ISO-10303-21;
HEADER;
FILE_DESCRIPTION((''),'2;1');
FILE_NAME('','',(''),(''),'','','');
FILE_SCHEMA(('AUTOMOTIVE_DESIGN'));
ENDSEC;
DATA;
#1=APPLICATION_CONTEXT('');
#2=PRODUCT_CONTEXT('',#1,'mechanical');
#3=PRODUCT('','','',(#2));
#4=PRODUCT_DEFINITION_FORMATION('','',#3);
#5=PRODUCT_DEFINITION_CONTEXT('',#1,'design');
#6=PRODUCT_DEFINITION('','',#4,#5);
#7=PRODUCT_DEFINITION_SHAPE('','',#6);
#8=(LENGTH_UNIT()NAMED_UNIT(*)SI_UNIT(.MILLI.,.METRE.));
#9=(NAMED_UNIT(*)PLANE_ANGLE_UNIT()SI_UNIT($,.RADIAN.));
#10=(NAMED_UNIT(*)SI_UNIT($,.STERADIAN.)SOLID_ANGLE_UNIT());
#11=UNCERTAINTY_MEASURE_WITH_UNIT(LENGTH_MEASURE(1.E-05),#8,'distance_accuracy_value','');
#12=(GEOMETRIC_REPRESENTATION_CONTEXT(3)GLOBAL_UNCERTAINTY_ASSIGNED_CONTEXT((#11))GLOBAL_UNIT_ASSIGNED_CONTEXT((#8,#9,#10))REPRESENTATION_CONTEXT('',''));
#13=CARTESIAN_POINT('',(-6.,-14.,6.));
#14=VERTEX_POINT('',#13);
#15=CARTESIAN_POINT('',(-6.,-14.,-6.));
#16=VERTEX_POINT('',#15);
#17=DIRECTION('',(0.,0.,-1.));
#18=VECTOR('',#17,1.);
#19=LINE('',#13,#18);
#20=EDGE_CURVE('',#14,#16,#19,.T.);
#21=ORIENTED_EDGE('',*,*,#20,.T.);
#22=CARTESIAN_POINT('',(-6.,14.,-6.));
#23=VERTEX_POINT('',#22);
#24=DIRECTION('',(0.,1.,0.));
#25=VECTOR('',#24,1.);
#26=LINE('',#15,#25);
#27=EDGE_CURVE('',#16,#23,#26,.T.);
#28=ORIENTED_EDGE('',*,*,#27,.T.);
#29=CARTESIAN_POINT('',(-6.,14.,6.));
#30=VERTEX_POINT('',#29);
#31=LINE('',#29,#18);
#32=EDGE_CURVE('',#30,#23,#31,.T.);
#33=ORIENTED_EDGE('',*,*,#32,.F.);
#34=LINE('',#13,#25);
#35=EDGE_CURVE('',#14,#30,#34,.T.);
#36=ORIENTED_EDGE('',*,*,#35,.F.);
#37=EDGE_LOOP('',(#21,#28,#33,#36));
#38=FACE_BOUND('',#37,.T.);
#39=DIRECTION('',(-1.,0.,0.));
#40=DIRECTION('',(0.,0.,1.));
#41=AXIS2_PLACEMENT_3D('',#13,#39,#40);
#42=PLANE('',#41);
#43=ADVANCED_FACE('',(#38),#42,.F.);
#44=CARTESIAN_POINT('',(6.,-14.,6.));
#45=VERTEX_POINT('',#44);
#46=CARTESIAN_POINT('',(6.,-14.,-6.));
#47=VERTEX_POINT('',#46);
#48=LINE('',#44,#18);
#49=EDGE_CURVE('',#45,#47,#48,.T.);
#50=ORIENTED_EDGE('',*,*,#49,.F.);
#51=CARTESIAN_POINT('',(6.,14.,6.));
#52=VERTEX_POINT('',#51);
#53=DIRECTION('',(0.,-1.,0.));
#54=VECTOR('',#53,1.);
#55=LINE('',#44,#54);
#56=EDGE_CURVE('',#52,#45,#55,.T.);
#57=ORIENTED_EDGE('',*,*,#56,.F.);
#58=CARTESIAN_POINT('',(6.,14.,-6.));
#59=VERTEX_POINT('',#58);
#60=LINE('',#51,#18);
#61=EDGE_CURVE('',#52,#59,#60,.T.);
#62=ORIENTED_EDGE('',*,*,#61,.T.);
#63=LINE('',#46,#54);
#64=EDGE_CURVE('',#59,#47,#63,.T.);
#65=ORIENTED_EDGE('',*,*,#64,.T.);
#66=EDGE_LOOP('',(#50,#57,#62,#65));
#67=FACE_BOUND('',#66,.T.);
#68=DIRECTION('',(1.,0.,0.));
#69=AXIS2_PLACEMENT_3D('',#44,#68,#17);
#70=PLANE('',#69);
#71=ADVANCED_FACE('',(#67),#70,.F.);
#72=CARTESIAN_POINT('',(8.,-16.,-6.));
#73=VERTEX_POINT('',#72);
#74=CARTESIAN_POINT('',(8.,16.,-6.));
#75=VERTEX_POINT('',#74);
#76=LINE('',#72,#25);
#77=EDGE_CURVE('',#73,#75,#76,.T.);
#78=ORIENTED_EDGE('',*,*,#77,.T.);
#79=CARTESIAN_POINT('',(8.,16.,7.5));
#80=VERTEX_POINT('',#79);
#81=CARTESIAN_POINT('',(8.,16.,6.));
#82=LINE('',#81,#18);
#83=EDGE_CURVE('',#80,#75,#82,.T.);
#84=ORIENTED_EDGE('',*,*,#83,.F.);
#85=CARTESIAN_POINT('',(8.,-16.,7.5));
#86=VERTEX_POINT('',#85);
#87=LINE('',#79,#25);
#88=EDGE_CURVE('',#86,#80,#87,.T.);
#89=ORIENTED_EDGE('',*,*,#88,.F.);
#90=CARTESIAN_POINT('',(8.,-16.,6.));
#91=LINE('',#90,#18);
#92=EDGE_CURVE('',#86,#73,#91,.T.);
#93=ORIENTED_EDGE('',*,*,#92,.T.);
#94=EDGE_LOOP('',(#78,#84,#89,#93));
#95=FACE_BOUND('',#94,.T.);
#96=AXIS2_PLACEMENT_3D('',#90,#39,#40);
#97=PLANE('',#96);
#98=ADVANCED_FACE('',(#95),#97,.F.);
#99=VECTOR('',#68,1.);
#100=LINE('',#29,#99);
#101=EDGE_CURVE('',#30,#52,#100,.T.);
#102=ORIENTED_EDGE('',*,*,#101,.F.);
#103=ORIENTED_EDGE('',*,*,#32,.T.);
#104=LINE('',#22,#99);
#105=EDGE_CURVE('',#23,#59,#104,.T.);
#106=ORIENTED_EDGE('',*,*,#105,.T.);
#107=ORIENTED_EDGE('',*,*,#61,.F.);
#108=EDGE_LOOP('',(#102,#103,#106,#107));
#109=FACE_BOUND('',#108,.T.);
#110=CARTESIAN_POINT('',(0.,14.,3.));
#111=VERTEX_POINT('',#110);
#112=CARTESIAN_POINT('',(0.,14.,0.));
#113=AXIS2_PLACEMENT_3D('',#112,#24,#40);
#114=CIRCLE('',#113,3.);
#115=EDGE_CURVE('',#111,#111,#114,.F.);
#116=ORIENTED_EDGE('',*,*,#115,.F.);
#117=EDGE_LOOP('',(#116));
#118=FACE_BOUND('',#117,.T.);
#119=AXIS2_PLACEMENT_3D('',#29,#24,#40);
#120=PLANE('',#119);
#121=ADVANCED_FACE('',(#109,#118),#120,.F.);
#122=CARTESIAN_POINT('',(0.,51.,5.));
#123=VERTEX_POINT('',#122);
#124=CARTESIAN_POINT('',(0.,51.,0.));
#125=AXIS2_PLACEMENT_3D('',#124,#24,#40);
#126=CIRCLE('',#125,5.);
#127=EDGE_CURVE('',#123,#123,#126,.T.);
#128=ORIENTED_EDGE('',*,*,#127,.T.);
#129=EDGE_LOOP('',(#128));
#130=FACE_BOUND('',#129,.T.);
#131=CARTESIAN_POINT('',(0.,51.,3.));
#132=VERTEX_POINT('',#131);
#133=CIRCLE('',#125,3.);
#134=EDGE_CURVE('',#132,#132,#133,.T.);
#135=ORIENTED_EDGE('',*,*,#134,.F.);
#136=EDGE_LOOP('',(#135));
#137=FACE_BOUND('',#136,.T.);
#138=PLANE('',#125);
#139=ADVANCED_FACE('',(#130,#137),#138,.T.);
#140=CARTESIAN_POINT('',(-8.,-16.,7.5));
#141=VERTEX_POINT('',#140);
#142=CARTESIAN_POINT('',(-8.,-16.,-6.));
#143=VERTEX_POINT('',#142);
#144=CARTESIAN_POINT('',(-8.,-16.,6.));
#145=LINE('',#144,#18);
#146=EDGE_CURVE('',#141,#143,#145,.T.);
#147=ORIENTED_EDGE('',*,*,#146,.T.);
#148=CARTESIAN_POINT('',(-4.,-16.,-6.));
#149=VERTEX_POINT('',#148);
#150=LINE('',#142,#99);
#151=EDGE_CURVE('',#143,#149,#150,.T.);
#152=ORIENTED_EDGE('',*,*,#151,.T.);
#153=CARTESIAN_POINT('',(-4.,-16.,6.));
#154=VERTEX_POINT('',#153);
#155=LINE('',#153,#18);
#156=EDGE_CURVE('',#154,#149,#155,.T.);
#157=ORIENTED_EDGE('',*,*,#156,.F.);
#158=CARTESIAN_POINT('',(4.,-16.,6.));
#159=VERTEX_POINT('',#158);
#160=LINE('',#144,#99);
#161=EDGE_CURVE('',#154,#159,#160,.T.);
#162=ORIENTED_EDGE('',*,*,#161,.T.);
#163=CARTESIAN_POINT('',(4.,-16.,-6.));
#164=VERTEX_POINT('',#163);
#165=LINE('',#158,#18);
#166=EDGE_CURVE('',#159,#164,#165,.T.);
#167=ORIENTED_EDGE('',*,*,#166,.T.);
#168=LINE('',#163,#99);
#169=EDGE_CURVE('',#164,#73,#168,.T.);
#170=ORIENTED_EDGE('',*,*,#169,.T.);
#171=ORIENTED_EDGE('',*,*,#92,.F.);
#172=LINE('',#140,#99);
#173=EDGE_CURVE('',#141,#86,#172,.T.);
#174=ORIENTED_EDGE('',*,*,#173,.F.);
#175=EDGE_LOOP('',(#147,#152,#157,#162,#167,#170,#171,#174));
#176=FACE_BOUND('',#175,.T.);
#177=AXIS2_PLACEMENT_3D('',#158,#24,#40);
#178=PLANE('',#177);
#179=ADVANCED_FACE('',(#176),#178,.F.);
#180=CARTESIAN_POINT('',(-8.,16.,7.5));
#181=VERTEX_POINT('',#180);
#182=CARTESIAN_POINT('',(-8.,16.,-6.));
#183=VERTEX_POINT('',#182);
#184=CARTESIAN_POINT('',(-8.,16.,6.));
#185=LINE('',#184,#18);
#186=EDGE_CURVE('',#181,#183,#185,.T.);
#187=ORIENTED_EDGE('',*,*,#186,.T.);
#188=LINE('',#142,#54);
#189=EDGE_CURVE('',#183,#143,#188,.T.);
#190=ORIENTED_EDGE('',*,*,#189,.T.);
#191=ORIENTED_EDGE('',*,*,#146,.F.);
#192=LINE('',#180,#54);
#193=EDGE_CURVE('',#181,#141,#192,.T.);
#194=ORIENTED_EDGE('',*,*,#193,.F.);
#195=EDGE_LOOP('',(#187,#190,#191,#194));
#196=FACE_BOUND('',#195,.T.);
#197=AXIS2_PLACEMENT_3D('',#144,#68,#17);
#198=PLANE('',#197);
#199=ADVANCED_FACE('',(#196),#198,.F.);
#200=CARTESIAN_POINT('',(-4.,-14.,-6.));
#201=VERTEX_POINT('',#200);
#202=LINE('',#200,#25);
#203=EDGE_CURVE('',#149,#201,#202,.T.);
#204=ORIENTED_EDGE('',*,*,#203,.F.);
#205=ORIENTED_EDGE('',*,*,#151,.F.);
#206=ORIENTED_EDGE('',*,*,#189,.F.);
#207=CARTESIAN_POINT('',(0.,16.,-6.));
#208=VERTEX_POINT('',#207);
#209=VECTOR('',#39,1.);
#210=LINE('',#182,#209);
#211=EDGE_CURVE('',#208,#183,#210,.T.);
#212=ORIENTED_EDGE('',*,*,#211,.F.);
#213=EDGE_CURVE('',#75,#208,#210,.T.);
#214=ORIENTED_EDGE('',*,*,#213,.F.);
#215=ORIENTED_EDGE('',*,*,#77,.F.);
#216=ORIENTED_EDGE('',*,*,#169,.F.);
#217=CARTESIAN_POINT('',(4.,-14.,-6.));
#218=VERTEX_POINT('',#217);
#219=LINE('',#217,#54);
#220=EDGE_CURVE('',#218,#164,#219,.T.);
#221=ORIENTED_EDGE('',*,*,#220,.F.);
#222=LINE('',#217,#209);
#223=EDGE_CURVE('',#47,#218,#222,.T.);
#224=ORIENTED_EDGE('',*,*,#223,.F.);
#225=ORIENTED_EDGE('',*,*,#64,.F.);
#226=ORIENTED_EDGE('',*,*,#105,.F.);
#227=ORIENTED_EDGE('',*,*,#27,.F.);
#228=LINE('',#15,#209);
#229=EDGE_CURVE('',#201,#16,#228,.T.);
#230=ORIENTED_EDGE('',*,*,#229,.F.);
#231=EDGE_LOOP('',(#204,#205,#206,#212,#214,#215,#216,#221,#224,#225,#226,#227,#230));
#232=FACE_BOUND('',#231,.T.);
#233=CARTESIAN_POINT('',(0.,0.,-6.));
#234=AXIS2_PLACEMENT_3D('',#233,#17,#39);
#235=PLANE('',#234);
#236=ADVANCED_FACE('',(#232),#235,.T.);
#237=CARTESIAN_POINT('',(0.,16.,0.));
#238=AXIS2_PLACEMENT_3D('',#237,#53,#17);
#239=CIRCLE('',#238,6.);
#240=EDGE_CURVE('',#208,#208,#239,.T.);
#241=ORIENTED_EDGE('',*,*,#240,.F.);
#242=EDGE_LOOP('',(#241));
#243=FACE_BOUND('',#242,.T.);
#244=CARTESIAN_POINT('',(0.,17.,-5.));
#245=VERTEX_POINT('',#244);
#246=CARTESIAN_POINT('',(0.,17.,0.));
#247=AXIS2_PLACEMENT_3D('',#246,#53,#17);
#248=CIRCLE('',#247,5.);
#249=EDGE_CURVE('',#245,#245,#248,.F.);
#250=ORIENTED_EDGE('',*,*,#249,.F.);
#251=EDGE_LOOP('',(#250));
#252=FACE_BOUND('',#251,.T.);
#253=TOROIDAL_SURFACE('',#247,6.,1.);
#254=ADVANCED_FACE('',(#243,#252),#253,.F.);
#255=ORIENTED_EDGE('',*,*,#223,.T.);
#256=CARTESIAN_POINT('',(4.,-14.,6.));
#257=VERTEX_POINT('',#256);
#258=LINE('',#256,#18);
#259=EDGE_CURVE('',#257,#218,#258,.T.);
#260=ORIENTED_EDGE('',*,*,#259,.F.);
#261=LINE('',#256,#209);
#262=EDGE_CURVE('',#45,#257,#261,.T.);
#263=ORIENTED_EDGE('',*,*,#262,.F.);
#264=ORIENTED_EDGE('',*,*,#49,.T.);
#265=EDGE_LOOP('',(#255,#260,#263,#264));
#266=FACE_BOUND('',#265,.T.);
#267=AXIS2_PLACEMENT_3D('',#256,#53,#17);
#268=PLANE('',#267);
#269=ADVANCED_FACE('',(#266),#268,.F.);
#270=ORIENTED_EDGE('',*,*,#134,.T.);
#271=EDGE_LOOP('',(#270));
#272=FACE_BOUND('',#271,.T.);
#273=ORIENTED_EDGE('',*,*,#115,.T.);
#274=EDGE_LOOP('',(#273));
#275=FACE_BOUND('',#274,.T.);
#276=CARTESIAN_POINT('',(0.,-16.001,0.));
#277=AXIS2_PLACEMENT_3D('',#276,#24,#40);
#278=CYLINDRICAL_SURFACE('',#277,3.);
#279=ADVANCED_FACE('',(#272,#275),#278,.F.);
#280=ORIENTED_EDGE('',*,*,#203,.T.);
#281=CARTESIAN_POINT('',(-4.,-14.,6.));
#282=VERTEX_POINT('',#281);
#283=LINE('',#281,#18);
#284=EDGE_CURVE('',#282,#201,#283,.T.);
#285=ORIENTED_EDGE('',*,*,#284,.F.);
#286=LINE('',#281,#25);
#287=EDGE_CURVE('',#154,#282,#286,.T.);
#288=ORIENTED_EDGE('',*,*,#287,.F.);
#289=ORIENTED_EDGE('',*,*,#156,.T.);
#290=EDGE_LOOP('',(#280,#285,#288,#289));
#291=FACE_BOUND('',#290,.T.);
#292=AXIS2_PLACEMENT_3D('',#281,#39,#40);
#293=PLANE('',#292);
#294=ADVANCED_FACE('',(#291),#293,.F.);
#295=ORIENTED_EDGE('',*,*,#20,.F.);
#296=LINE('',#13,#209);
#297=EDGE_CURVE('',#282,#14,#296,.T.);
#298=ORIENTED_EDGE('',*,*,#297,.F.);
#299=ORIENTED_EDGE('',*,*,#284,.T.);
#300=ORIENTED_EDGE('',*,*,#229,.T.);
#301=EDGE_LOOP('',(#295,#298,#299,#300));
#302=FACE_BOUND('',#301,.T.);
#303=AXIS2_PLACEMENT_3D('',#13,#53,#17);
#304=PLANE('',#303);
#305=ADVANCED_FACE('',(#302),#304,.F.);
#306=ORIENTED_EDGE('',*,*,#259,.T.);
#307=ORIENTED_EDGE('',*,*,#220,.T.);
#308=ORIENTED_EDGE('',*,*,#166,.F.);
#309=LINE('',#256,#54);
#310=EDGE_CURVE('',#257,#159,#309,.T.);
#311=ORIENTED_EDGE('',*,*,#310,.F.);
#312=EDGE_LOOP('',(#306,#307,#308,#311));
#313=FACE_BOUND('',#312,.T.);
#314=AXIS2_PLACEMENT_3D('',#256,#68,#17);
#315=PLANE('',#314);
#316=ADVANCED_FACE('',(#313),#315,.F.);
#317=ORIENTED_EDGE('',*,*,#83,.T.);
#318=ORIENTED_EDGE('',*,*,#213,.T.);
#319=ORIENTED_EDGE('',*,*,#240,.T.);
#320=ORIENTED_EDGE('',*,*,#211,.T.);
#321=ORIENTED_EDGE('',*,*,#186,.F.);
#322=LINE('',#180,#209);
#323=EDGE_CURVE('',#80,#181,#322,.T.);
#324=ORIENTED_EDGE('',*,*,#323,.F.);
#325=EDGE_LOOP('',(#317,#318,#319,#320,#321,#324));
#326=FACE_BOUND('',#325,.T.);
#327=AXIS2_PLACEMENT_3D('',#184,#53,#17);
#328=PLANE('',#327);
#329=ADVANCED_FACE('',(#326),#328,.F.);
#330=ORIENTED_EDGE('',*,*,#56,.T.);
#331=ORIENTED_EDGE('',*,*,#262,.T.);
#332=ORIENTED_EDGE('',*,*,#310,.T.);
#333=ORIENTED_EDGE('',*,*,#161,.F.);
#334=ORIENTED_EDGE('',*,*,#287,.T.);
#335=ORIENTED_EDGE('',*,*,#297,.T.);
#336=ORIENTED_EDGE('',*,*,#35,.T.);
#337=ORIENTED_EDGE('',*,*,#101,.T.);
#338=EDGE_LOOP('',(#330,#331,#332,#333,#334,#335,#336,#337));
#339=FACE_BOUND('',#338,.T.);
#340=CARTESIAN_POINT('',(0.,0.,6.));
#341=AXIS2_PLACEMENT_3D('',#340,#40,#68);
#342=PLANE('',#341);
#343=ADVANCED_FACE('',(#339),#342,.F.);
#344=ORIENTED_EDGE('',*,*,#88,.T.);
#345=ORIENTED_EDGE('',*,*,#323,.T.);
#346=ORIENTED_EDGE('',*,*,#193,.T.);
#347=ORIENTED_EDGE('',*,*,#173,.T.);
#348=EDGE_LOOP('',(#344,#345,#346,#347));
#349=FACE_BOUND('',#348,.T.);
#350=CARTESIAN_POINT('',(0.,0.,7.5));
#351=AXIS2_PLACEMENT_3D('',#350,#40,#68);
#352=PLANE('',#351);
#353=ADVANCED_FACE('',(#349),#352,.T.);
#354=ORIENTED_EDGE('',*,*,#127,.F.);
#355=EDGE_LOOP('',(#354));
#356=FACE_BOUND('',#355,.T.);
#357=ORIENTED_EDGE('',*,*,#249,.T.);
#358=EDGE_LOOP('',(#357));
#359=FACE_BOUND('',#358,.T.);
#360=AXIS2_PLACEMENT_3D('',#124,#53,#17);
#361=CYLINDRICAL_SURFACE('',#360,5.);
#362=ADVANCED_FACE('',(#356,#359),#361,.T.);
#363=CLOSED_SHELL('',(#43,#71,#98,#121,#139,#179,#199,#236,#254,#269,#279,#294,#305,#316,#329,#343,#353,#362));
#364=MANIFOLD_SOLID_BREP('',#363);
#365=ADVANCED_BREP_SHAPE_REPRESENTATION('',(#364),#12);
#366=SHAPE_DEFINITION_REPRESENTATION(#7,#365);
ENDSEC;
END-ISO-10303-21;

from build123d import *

# Parameters (mm, degrees)
BOSS_EXTRUDE1_DEPTH = 6
SKETCH2_R           = 5
BOSS_EXTRUDE2_DEPTH = 35
FILLET1_R           = 1
SKETCH3_W           = 16
SKETCH3_H           = 32
BOSS_EXTRUDE3_DEPTH = 1.5
CUT_EXTRUDE1_REACH  = 69.891
SKETCH4_R           = 3


with BuildPart() as part:
    # Sketch1 → Boss-Extrude1 (new, symmetric)
    with BuildSketch(Plane.XY):
        Polygon((-6, -14), (-6, 14), (6, 14), (6, -14), (4, -14), (4, -16), (8, -16), (8, 16), (-8, 16), (-8, -16), (-4, -16), (-4, -14), align=None)
    extrude(amount=BOSS_EXTRUDE1_DEPTH, both=True)

    # Sketch2 → Boss-Extrude2 (add)
    with BuildSketch(Plane(origin=(0, 16, 0), x_dir=(1, 0, 0), z_dir=(0, 1, 0))):
        with Locations(Location((0, 0, 0), (0, 0, 270))):
            Circle(SKETCH2_R)
    extrude(amount=BOSS_EXTRUDE2_DEPTH)

    # Fillet1
    fillet1_edges = [part.edges().sort_by_distance(p)[0] for p in [
        (0, 16, -5),
    ]]
    fillet(fillet1_edges, radius=FILLET1_R - 0.0001)  # a hair under: the kernel refuses the full size

    # Sketch3 → Boss-Extrude3 (add)
    with BuildSketch(Plane.XY.offset(6)):
        Rectangle(SKETCH3_W, SKETCH3_H)
    extrude(amount=BOSS_EXTRUDE3_DEPTH)

    # Sketch4 → Cut-Extrude1 (cut, up to next)
    with BuildSketch(Plane(origin=(0, 51, 0), x_dir=(1, 0, 0), z_dir=(0, 1, 0)), mode=Mode.PRIVATE) as cut_extrude1_sk1:
        with Locations(Location((0, 0, 0), (0, 0, 270))):
            Circle(SKETCH4_R)
    cut_extrude1_tool1 = extrude(cut_extrude1_sk1.sketch, amount=-CUT_EXTRUDE1_REACH, mode=Mode.PRIVATE) & part.part
    add(cut_extrude1_tool1.solids().sort_by_distance((0, 51, 0))[0], mode=Mode.SUBTRACT)


solid = part.part
